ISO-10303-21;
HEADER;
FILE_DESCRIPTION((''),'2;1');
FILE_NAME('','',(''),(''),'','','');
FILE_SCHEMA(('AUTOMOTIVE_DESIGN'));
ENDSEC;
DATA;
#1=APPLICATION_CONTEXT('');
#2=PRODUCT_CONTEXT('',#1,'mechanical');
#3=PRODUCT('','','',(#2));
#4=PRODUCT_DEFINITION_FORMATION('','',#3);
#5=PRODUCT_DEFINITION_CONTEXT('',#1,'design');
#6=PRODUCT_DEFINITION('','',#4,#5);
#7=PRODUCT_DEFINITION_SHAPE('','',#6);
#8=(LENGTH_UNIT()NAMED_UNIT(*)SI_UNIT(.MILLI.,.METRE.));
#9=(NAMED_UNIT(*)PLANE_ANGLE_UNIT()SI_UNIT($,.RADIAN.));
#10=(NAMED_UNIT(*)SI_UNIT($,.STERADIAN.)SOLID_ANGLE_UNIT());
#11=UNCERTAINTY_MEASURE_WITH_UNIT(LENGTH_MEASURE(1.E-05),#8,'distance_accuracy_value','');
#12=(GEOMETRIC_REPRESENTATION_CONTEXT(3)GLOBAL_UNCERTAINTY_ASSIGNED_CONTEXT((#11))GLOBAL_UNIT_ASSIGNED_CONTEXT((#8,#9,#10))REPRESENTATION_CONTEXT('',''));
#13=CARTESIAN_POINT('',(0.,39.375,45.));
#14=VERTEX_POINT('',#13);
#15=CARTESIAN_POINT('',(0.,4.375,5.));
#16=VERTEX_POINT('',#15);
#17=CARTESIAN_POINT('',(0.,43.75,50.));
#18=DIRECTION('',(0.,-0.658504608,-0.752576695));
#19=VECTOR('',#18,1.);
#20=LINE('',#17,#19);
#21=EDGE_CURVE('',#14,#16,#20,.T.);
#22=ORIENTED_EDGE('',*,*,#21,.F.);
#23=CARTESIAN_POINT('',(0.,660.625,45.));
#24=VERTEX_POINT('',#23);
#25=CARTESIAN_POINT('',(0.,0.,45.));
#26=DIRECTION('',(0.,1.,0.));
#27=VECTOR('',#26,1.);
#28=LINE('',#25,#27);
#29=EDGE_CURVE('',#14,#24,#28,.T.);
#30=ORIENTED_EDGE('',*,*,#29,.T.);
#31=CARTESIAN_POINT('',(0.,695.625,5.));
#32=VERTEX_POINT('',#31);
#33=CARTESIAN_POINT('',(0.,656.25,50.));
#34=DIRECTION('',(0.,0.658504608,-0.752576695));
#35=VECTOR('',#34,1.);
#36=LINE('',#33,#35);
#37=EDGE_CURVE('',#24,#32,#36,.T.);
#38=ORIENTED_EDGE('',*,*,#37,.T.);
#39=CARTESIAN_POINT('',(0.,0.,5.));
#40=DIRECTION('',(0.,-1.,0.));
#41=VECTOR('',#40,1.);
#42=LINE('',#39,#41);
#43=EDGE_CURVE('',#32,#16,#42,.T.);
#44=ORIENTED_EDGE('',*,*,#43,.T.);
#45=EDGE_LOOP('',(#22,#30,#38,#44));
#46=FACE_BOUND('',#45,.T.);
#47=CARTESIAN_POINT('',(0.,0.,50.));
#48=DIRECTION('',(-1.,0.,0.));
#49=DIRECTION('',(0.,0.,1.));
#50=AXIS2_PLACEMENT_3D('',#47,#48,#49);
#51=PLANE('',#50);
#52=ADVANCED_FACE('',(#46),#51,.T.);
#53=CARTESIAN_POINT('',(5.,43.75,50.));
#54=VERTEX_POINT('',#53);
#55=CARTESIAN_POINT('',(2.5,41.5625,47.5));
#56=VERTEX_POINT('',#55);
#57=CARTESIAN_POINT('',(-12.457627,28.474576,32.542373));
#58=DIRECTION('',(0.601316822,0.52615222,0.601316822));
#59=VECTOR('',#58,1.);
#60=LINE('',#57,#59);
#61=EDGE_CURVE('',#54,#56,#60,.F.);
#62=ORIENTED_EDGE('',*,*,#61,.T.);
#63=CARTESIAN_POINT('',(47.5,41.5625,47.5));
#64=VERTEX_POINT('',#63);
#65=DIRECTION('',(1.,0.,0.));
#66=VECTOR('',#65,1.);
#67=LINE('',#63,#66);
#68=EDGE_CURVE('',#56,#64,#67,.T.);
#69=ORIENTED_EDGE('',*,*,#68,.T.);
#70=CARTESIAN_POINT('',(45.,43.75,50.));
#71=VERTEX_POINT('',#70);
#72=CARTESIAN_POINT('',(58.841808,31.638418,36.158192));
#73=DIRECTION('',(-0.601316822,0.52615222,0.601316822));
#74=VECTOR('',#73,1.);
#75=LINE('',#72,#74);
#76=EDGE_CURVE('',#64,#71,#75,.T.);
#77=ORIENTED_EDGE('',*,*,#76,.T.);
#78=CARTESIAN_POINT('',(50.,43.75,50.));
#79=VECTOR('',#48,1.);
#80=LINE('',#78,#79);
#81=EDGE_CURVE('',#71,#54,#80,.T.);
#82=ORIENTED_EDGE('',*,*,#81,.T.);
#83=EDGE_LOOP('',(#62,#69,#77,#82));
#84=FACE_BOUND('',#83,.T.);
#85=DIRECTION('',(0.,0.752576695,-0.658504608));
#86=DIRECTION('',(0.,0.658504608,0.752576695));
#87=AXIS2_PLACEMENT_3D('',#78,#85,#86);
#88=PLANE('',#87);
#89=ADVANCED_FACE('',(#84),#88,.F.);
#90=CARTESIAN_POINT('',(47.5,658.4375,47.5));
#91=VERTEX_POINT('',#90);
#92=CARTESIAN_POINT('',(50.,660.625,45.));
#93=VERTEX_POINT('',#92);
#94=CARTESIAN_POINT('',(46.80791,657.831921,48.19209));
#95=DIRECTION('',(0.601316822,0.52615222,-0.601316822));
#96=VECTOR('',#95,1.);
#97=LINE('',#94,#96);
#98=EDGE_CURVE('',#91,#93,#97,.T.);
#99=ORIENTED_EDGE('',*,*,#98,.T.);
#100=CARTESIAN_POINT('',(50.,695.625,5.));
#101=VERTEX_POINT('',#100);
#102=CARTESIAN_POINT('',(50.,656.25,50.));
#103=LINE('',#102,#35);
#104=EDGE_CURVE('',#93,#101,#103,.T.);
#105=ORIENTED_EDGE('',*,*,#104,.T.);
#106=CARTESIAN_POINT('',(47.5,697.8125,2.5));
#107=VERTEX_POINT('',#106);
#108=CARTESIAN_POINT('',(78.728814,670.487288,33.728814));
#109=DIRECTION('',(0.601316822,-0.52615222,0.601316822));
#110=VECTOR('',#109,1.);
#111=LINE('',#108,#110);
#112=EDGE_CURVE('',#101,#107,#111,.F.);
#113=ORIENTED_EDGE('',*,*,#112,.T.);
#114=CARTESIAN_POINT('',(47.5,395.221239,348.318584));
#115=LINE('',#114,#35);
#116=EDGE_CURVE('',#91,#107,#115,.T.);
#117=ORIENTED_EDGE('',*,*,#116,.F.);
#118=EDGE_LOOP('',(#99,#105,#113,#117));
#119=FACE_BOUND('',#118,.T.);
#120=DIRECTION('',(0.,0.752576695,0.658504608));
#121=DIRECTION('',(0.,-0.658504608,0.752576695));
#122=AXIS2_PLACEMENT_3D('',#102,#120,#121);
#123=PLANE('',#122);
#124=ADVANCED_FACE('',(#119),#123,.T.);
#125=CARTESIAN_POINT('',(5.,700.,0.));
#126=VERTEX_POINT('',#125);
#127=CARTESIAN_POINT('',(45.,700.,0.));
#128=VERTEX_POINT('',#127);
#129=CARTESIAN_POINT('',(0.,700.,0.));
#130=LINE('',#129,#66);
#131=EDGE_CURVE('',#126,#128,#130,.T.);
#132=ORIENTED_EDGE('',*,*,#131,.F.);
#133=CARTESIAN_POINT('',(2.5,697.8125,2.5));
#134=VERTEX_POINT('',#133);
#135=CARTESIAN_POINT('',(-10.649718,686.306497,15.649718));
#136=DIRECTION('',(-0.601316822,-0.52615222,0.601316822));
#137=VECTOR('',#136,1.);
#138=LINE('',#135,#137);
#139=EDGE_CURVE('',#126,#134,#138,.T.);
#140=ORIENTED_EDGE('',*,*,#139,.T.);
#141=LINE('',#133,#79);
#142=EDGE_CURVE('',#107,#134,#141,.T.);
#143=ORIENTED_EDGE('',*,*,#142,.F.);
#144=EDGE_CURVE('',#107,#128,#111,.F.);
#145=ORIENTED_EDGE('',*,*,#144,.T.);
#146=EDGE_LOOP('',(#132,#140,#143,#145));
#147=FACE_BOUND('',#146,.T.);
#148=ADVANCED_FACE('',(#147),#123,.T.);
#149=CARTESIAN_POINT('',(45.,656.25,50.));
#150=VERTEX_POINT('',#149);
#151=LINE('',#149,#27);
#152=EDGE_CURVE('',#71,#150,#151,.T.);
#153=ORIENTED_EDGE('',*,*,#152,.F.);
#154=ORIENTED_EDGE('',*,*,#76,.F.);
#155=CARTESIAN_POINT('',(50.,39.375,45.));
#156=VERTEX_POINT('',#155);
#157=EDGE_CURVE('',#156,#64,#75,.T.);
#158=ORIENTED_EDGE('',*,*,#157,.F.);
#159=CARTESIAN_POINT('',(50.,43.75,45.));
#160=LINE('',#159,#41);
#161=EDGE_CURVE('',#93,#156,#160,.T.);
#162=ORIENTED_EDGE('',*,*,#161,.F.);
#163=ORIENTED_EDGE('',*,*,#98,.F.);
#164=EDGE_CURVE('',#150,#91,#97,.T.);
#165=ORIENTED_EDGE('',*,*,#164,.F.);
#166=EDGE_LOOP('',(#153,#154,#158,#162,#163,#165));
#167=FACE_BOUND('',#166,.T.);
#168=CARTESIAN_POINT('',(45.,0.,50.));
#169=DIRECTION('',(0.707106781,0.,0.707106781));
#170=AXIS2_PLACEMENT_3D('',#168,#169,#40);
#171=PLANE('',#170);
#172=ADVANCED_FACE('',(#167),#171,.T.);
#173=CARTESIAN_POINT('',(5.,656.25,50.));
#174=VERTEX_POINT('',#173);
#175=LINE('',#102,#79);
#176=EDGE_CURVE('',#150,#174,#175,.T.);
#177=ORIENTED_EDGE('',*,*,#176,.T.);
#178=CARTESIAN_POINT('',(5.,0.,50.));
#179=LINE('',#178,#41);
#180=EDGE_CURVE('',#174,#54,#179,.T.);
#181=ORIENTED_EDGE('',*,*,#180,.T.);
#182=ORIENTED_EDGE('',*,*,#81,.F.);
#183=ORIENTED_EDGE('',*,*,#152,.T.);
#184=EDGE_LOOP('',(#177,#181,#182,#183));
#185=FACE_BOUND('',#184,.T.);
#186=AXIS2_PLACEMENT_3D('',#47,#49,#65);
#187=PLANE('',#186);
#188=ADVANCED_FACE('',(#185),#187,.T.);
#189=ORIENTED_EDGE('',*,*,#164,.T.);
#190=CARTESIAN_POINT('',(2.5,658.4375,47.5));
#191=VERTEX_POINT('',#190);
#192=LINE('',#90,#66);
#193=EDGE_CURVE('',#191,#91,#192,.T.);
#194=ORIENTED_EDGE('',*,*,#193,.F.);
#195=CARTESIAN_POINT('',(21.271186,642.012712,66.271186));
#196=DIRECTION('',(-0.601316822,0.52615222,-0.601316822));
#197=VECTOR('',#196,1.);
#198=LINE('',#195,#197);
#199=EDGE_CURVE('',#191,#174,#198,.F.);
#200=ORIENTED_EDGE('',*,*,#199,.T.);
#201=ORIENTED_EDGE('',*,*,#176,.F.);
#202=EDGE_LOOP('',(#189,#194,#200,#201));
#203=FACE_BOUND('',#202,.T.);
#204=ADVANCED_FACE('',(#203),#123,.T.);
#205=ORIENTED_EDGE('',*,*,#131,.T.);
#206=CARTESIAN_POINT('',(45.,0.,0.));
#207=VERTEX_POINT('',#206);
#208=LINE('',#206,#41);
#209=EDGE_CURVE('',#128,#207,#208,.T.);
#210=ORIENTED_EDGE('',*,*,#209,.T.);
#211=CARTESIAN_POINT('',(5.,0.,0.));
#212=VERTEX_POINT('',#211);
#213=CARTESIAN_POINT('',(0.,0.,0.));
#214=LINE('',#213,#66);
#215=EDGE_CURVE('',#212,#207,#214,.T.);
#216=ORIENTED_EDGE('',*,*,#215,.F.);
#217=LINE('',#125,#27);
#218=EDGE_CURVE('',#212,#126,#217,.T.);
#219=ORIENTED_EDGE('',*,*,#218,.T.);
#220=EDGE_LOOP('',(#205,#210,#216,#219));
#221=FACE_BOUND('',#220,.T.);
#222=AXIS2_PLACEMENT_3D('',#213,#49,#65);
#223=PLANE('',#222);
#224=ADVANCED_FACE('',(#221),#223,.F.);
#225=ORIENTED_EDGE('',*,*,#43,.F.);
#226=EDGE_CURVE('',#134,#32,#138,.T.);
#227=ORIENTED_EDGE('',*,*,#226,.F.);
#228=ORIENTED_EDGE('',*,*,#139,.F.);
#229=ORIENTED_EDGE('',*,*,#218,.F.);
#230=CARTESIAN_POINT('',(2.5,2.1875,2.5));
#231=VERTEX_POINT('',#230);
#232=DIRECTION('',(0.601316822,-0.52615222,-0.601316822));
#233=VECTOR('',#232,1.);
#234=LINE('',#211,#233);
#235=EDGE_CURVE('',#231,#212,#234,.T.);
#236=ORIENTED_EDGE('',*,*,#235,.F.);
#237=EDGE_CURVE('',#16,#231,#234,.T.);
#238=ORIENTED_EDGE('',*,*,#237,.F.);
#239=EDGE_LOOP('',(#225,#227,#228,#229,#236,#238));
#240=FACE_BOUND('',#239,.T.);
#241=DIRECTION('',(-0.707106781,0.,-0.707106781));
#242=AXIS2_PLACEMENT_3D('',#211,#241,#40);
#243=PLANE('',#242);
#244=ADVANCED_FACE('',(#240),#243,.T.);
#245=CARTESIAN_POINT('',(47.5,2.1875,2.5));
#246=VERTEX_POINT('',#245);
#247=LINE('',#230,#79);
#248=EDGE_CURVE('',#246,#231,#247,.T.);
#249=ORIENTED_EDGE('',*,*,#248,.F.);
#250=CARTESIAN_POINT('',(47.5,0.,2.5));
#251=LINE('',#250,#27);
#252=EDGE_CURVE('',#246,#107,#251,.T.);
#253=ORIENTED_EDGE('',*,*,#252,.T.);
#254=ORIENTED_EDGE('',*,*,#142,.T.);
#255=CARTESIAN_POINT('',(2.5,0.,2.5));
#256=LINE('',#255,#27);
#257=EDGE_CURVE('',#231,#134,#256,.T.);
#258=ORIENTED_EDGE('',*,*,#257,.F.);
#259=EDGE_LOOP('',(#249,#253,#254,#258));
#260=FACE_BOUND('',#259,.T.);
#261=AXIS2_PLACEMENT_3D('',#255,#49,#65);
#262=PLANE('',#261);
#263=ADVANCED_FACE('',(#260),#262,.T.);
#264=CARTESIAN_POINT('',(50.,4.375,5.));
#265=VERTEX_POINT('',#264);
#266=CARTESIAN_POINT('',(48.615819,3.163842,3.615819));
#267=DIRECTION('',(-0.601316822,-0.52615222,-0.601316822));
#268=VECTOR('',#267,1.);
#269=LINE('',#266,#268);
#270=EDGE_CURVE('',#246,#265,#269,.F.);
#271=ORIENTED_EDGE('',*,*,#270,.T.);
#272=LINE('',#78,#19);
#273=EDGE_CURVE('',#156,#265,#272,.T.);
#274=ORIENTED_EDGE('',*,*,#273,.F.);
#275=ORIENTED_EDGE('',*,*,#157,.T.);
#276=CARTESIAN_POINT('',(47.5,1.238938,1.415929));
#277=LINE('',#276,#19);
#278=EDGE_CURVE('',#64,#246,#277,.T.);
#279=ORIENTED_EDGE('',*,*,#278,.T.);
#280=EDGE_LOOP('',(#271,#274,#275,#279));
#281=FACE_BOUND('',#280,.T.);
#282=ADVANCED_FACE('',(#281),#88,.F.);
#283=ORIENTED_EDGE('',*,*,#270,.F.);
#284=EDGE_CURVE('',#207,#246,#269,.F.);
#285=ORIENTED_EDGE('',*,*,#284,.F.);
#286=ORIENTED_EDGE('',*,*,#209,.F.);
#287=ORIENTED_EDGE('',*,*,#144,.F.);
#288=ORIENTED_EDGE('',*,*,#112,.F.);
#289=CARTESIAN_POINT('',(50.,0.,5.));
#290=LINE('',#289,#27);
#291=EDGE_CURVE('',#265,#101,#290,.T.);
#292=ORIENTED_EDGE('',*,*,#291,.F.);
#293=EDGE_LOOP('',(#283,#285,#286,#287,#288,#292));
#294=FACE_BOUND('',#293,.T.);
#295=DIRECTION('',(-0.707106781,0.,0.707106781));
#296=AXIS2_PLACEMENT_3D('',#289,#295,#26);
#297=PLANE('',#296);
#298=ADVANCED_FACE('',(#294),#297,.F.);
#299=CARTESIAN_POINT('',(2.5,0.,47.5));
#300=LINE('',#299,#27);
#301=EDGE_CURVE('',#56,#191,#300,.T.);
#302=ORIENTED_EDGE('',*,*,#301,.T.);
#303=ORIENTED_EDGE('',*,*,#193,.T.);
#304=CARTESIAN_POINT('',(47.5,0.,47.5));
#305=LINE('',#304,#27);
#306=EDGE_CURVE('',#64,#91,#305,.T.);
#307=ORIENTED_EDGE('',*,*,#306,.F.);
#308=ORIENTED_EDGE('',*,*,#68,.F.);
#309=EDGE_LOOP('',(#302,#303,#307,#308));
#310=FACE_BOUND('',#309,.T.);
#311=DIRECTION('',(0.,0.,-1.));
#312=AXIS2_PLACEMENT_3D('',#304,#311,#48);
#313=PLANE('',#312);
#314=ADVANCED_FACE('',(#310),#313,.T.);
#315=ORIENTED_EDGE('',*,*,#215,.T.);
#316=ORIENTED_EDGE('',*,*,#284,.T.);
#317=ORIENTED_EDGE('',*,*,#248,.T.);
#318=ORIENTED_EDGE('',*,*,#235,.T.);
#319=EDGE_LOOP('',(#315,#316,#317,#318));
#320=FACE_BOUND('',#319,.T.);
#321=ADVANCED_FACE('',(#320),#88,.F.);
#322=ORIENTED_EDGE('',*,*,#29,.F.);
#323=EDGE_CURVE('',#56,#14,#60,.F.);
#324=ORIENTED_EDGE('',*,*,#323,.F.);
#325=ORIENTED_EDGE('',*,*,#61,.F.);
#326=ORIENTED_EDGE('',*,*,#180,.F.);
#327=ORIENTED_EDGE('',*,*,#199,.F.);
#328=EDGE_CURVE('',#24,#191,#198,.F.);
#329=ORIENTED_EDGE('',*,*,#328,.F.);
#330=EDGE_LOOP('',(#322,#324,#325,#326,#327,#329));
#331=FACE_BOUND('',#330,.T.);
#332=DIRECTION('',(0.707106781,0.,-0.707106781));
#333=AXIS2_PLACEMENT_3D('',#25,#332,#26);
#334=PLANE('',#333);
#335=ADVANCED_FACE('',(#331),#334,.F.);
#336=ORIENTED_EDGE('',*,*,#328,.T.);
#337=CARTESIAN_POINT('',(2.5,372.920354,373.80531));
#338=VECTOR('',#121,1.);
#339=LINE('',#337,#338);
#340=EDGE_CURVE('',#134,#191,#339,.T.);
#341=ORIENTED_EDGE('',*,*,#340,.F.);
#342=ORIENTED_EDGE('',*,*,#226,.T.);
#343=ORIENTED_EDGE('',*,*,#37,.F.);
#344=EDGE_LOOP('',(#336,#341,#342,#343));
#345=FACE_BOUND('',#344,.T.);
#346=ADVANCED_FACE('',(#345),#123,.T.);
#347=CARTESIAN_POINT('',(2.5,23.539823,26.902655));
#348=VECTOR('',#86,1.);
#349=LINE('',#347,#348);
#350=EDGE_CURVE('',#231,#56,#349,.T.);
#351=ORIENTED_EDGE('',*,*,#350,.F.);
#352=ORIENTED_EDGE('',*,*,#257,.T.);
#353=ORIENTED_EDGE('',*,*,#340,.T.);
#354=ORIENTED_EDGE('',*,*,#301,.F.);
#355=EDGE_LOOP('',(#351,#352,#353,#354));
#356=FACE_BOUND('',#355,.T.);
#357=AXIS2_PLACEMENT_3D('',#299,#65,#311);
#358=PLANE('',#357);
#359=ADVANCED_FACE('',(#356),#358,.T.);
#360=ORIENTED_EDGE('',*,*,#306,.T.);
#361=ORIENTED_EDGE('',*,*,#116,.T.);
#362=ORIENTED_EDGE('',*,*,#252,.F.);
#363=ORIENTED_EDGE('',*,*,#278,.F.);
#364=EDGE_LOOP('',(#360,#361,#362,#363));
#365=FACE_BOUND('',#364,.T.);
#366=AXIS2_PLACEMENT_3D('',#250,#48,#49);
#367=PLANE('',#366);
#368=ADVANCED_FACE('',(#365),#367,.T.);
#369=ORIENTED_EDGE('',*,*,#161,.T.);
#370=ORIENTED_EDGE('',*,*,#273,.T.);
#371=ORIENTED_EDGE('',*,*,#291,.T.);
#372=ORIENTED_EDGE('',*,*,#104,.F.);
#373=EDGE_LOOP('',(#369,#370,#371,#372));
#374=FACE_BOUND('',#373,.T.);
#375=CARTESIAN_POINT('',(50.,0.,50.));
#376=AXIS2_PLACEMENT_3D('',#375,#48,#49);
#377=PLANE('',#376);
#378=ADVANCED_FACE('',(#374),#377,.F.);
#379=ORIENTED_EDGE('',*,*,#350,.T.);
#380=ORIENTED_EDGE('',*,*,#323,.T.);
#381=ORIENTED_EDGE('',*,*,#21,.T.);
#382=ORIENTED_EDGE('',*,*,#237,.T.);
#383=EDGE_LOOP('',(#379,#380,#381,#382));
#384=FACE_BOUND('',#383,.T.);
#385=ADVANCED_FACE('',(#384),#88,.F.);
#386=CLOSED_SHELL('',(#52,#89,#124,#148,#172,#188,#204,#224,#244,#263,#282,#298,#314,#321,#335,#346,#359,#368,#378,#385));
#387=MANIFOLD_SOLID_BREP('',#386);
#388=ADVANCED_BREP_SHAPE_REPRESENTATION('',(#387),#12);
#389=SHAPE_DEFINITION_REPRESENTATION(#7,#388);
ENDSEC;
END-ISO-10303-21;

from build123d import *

# Parameters (mm, degrees)
SKETCH1_W           = 50
SKETCH1_H           = 700
BOSS_EXTRUDE1_DEPTH = 50
SKETCH2_W           = 45
SKETCH2_H           = 45
CUT_EXTRUDE1_DEPTH  = 704.562363974
CUT_EXTRUDE2_DEPTH  = 704.562363974
CHAMFER1_SIZE       = 5


with BuildPart() as part:
    # Sketch1 → Boss-Extrude1 (new body)
    with BuildSketch(Plane.XY):
        with Locations((25, 350)):
            Rectangle(SKETCH1_W, SKETCH1_H)
    extrude(amount=BOSS_EXTRUDE1_DEPTH)

    # Sketch2 → Cut-Extrude1 (cut, through all)
    with BuildSketch(Plane(origin=(0, 700, 0), x_dir=(1, 0, 0), z_dir=(0, 1, 0))):
        with Locations((25, -25)):
            Rectangle(SKETCH2_W, SKETCH2_H)
    extrude(amount=-CUT_EXTRUDE1_DEPTH, mode=Mode.SUBTRACT)

    # Sketch3 → Cut-Extrude2 (cut, through all)
    with BuildSketch(Plane.ZY):
        Polygon((0, 700), (50, 700), (50, 656.25), align=None)
        Polygon((0, 0), (50, 0), (50, 43.75), align=None)
    extrude(amount=-CUT_EXTRUDE2_DEPTH, mode=Mode.SUBTRACT)

    # Chamfer1
    chamfer1_edges = [part.edges().sort_by_distance(p)[0] for p in [
        (0, 350, 50),
        (50, 350, 50),
        (0, 350, 0),
        (50, 350, 0),
    ]]
    chamfer(chamfer1_edges, length=CHAMFER1_SIZE - 0.0001)  # a hair under: the kernel refuses the full size


solid = part.part
